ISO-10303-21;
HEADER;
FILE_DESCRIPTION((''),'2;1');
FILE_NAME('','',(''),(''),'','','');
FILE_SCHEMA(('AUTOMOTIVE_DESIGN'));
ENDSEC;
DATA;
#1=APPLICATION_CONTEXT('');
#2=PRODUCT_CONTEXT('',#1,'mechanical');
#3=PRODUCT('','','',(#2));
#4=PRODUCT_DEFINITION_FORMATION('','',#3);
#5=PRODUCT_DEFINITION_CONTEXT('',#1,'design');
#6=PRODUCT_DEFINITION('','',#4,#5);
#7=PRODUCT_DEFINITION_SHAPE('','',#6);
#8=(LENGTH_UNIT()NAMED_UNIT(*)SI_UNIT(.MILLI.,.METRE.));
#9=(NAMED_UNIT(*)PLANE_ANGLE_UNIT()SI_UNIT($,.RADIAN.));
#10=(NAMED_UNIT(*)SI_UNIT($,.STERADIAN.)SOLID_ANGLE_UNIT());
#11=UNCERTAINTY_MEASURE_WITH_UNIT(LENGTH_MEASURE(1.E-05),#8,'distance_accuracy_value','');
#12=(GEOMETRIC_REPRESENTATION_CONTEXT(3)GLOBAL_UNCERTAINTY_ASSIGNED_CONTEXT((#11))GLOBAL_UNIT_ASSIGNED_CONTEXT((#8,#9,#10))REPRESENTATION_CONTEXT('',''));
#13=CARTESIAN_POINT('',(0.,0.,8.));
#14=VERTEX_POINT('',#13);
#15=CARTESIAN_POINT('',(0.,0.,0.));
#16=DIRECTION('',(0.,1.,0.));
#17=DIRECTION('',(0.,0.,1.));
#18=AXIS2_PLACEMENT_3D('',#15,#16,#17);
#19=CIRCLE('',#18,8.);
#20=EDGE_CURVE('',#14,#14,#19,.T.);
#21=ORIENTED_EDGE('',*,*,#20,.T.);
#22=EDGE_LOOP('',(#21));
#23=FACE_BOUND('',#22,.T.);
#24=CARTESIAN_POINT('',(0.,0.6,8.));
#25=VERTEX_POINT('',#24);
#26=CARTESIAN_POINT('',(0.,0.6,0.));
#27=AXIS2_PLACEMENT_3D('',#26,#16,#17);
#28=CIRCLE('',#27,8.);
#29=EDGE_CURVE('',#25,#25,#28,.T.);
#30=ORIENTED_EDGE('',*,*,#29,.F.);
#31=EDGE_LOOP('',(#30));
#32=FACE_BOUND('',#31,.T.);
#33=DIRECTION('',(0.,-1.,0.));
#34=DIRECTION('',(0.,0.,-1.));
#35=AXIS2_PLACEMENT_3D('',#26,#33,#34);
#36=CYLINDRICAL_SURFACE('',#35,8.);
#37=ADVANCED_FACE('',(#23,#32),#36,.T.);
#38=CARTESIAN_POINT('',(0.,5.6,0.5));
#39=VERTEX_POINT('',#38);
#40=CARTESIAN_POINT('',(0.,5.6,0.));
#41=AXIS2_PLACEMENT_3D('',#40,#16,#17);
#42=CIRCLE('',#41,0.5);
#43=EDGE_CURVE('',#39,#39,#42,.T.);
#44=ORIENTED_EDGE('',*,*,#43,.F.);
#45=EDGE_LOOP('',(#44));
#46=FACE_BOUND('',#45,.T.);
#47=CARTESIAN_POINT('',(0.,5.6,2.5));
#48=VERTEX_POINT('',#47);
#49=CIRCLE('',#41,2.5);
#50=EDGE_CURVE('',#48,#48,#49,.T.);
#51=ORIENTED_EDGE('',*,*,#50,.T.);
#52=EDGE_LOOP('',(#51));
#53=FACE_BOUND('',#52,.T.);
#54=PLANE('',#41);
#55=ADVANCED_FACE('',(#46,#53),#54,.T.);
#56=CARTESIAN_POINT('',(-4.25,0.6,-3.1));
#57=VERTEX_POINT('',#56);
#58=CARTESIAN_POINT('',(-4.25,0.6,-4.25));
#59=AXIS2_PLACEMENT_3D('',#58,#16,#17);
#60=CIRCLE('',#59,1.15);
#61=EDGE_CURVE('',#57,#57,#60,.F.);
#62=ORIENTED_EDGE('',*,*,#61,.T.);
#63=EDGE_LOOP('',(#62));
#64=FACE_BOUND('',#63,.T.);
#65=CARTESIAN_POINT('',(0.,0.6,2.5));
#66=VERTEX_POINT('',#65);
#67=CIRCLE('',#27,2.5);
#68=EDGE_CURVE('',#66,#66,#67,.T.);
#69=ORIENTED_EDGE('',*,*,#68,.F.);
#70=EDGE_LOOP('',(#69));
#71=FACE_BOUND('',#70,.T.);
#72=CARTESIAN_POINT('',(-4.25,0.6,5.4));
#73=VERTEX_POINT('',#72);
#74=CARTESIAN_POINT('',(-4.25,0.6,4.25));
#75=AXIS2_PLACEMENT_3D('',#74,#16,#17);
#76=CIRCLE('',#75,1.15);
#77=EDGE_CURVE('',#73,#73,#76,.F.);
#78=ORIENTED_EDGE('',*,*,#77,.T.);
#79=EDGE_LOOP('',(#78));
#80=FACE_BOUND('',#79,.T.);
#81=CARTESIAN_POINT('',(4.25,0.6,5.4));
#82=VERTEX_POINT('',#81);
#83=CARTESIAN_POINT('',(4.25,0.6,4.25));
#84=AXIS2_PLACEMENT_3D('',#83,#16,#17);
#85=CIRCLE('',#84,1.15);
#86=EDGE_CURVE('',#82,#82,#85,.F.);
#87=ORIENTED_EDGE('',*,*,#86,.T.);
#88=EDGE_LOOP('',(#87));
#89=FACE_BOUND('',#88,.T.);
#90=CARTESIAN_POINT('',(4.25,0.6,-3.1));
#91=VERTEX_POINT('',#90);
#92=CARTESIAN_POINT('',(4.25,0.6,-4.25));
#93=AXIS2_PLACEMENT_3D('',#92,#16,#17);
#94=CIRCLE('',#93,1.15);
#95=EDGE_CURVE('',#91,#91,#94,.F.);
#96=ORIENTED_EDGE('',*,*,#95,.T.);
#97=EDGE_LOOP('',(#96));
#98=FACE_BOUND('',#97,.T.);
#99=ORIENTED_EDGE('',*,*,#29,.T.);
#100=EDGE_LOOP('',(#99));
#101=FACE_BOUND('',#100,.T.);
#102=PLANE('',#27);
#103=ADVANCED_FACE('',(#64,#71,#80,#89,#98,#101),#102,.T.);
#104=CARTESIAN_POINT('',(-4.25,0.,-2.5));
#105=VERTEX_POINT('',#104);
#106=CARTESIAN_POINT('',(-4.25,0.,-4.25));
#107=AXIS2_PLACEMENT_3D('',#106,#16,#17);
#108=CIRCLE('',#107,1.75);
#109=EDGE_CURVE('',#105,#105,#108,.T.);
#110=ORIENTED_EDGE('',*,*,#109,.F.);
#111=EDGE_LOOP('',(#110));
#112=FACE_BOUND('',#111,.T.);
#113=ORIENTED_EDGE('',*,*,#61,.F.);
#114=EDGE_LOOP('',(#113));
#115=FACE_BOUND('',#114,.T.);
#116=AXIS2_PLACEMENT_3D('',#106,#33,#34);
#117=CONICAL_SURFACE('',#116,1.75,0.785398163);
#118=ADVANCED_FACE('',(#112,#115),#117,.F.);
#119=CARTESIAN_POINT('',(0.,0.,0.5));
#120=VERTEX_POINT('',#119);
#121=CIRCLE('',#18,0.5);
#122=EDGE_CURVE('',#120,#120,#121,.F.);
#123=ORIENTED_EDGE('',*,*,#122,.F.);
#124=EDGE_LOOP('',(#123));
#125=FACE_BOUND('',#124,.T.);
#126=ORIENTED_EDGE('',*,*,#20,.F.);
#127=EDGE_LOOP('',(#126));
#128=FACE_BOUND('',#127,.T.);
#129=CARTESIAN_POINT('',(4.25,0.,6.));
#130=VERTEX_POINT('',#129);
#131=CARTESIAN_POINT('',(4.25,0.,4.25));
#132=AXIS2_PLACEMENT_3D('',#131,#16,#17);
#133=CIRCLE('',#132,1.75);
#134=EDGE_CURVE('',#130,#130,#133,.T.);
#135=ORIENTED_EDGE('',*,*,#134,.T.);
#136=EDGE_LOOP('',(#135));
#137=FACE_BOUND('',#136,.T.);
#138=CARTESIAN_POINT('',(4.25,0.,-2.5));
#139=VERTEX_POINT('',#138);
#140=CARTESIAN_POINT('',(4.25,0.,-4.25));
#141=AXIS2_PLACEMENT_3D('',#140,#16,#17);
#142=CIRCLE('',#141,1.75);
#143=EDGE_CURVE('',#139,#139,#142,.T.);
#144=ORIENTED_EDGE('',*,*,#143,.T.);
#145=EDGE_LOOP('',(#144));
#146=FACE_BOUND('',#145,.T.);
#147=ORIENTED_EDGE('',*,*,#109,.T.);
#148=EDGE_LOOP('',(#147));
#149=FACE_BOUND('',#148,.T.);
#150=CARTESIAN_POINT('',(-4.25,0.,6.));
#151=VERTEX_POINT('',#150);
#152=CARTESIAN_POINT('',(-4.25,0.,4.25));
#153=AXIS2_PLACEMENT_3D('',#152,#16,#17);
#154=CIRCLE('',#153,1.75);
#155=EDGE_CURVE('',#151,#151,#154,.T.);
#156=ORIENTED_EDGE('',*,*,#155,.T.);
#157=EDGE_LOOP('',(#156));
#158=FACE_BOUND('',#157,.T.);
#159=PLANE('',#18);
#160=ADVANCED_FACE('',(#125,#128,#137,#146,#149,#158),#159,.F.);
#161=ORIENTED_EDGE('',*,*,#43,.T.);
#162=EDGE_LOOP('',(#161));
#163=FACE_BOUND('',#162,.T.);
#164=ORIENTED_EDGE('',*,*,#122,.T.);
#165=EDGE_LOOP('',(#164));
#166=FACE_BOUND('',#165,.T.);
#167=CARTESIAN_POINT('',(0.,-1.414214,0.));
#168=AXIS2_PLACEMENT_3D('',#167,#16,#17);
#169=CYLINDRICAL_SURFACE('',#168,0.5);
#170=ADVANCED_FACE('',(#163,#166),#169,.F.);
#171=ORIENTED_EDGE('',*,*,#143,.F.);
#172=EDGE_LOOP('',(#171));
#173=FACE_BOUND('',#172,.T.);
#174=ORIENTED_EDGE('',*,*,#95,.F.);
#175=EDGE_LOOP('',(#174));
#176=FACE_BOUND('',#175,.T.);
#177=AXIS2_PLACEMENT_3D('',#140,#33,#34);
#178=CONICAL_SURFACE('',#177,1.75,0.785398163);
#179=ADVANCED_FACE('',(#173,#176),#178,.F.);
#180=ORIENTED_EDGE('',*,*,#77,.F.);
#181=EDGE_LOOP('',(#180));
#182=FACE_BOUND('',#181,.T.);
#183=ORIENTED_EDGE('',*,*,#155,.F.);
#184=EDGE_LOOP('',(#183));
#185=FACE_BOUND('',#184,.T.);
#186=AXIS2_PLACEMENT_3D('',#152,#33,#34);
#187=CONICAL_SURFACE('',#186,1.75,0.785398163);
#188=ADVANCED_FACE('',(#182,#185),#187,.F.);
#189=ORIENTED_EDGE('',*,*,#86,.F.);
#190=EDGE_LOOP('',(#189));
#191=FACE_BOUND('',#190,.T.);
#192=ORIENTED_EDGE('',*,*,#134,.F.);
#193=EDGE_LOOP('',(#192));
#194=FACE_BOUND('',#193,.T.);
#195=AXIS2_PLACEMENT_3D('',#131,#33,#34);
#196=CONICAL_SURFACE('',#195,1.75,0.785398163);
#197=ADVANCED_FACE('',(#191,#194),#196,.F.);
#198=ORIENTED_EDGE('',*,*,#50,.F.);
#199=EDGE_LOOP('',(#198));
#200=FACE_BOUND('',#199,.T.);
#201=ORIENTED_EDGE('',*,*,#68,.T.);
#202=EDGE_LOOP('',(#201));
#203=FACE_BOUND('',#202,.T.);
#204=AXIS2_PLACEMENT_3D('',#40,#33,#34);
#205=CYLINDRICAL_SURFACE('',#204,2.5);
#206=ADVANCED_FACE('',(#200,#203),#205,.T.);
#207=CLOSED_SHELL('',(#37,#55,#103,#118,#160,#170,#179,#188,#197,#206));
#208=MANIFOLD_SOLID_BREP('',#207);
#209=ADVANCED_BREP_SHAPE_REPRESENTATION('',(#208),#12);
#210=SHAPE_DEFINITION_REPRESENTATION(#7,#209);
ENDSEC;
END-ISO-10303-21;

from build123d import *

# Parameters (mm, degrees)
ESQUISSE1_R             = 8
ESQUISSE1_R_2           = 1
BOSS_EXTRU_1_DEPTH      = 0.6
ESQUISSE2_R             = 2.5
BOSS_EXTRU_2_DEPTH      = 5
ESQUISSE3_R             = 0.5
ENL_V_MAT_EXTRU_1_DEPTH = 5.6
CHANFREIN1_SIZE         = 0.75


with BuildPart() as part:
    # Esquisse1 → Boss.-Extru.1 (new body)
    with BuildSketch(Plane(origin=(0, 0, 0), x_dir=(1, 0, 0), z_dir=(0, 1, 0))):
        with Locations(Location((0, 0, 0), (0, 0, 270))):
            Circle(ESQUISSE1_R)
        with Locations(Location((-4.25, 4.25, 0), (0, 0, 270))):
            Circle(ESQUISSE1_R_2, mode=Mode.SUBTRACT)
        with Locations(Location((4.25, 4.25, 0), (0, 0, 270))):
            Circle(ESQUISSE1_R_2, mode=Mode.SUBTRACT)
        with Locations(Location((4.25, -4.25, 0), (0, 0, 270))):
            Circle(ESQUISSE1_R_2, mode=Mode.SUBTRACT)
        with Locations(Location((-4.25, -4.25, 0), (0, 0, 270))):
            Circle(ESQUISSE1_R_2, mode=Mode.SUBTRACT)
    extrude(amount=BOSS_EXTRU_1_DEPTH)

    # Esquisse2 → Boss.-Extru.2 (add)
    with BuildSketch(Plane(origin=(0, 0.6, 0), x_dir=(1, 0, 0), z_dir=(0, 1, 0))):
        with Locations(Location((0, 0, 0), (0, 0, 270))):
            Circle(ESQUISSE2_R)
    extrude(amount=BOSS_EXTRU_2_DEPTH)

    # Esquisse3 → Enlèv. mat.-Extru.1 (cut)
    with BuildSketch(Plane(origin=(0, 5.6, 0), x_dir=(1, 0, 0), z_dir=(0, 1, 0))):
        with Locations(Location((0, 0, 0), (0, 0, 270))):
            Circle(ESQUISSE3_R)
    extrude(amount=-ENL_V_MAT_EXTRU_1_DEPTH, mode=Mode.SUBTRACT)

    # Chanfrein1
    # the kernel refuses this chamfer: 0.75 mm, written as the material it takes off along each edge
    with BuildSketch(Plane(origin=(4.25, 0, 4.25), x_dir=(0, 0, 1), z_dir=(-1, 0, 0))) as chanfrein1_piece_1:
        Polygon((1 + CHANFREIN1_SIZE, 0), (1, CHANFREIN1_SIZE), (1, 0), align=None)
    revolve(axis=Axis((4.25, 0, 4.25), (0, 1, 0)), mode=Mode.SUBTRACT)
    with BuildSketch(Plane(origin=(-4.25, 0, 4.25), x_dir=(0, 0, 1), z_dir=(-1, 0, 0))) as chanfrein1_piece_2:
        Polygon((1 + CHANFREIN1_SIZE, 0), (1, CHANFREIN1_SIZE), (1, 0), align=None)
    revolve(axis=Axis((-4.25, 0, 4.25), (0, 1, 0)), mode=Mode.SUBTRACT)
    with BuildSketch(Plane(origin=(-4.25, 0, -4.25), x_dir=(0, 0, 1), z_dir=(-1, 0, 0))) as chanfrein1_piece_3:
        Polygon((1 + CHANFREIN1_SIZE, 0), (1, CHANFREIN1_SIZE), (1, 0), align=None)
    revolve(axis=Axis((-4.25, 0, -4.25), (0, 1, 0)), mode=Mode.SUBTRACT)
    with BuildSketch(Plane(origin=(4.25, 0, -4.25), x_dir=(0, 0, 1), z_dir=(-1, 0, 0))) as chanfrein1_piece_4:
        Polygon((1 + CHANFREIN1_SIZE, 0), (1, CHANFREIN1_SIZE), (1, 0), align=None)
    revolve(axis=Axis((4.25, 0, -4.25), (0, 1, 0)), mode=Mode.SUBTRACT)


solid = part.part
